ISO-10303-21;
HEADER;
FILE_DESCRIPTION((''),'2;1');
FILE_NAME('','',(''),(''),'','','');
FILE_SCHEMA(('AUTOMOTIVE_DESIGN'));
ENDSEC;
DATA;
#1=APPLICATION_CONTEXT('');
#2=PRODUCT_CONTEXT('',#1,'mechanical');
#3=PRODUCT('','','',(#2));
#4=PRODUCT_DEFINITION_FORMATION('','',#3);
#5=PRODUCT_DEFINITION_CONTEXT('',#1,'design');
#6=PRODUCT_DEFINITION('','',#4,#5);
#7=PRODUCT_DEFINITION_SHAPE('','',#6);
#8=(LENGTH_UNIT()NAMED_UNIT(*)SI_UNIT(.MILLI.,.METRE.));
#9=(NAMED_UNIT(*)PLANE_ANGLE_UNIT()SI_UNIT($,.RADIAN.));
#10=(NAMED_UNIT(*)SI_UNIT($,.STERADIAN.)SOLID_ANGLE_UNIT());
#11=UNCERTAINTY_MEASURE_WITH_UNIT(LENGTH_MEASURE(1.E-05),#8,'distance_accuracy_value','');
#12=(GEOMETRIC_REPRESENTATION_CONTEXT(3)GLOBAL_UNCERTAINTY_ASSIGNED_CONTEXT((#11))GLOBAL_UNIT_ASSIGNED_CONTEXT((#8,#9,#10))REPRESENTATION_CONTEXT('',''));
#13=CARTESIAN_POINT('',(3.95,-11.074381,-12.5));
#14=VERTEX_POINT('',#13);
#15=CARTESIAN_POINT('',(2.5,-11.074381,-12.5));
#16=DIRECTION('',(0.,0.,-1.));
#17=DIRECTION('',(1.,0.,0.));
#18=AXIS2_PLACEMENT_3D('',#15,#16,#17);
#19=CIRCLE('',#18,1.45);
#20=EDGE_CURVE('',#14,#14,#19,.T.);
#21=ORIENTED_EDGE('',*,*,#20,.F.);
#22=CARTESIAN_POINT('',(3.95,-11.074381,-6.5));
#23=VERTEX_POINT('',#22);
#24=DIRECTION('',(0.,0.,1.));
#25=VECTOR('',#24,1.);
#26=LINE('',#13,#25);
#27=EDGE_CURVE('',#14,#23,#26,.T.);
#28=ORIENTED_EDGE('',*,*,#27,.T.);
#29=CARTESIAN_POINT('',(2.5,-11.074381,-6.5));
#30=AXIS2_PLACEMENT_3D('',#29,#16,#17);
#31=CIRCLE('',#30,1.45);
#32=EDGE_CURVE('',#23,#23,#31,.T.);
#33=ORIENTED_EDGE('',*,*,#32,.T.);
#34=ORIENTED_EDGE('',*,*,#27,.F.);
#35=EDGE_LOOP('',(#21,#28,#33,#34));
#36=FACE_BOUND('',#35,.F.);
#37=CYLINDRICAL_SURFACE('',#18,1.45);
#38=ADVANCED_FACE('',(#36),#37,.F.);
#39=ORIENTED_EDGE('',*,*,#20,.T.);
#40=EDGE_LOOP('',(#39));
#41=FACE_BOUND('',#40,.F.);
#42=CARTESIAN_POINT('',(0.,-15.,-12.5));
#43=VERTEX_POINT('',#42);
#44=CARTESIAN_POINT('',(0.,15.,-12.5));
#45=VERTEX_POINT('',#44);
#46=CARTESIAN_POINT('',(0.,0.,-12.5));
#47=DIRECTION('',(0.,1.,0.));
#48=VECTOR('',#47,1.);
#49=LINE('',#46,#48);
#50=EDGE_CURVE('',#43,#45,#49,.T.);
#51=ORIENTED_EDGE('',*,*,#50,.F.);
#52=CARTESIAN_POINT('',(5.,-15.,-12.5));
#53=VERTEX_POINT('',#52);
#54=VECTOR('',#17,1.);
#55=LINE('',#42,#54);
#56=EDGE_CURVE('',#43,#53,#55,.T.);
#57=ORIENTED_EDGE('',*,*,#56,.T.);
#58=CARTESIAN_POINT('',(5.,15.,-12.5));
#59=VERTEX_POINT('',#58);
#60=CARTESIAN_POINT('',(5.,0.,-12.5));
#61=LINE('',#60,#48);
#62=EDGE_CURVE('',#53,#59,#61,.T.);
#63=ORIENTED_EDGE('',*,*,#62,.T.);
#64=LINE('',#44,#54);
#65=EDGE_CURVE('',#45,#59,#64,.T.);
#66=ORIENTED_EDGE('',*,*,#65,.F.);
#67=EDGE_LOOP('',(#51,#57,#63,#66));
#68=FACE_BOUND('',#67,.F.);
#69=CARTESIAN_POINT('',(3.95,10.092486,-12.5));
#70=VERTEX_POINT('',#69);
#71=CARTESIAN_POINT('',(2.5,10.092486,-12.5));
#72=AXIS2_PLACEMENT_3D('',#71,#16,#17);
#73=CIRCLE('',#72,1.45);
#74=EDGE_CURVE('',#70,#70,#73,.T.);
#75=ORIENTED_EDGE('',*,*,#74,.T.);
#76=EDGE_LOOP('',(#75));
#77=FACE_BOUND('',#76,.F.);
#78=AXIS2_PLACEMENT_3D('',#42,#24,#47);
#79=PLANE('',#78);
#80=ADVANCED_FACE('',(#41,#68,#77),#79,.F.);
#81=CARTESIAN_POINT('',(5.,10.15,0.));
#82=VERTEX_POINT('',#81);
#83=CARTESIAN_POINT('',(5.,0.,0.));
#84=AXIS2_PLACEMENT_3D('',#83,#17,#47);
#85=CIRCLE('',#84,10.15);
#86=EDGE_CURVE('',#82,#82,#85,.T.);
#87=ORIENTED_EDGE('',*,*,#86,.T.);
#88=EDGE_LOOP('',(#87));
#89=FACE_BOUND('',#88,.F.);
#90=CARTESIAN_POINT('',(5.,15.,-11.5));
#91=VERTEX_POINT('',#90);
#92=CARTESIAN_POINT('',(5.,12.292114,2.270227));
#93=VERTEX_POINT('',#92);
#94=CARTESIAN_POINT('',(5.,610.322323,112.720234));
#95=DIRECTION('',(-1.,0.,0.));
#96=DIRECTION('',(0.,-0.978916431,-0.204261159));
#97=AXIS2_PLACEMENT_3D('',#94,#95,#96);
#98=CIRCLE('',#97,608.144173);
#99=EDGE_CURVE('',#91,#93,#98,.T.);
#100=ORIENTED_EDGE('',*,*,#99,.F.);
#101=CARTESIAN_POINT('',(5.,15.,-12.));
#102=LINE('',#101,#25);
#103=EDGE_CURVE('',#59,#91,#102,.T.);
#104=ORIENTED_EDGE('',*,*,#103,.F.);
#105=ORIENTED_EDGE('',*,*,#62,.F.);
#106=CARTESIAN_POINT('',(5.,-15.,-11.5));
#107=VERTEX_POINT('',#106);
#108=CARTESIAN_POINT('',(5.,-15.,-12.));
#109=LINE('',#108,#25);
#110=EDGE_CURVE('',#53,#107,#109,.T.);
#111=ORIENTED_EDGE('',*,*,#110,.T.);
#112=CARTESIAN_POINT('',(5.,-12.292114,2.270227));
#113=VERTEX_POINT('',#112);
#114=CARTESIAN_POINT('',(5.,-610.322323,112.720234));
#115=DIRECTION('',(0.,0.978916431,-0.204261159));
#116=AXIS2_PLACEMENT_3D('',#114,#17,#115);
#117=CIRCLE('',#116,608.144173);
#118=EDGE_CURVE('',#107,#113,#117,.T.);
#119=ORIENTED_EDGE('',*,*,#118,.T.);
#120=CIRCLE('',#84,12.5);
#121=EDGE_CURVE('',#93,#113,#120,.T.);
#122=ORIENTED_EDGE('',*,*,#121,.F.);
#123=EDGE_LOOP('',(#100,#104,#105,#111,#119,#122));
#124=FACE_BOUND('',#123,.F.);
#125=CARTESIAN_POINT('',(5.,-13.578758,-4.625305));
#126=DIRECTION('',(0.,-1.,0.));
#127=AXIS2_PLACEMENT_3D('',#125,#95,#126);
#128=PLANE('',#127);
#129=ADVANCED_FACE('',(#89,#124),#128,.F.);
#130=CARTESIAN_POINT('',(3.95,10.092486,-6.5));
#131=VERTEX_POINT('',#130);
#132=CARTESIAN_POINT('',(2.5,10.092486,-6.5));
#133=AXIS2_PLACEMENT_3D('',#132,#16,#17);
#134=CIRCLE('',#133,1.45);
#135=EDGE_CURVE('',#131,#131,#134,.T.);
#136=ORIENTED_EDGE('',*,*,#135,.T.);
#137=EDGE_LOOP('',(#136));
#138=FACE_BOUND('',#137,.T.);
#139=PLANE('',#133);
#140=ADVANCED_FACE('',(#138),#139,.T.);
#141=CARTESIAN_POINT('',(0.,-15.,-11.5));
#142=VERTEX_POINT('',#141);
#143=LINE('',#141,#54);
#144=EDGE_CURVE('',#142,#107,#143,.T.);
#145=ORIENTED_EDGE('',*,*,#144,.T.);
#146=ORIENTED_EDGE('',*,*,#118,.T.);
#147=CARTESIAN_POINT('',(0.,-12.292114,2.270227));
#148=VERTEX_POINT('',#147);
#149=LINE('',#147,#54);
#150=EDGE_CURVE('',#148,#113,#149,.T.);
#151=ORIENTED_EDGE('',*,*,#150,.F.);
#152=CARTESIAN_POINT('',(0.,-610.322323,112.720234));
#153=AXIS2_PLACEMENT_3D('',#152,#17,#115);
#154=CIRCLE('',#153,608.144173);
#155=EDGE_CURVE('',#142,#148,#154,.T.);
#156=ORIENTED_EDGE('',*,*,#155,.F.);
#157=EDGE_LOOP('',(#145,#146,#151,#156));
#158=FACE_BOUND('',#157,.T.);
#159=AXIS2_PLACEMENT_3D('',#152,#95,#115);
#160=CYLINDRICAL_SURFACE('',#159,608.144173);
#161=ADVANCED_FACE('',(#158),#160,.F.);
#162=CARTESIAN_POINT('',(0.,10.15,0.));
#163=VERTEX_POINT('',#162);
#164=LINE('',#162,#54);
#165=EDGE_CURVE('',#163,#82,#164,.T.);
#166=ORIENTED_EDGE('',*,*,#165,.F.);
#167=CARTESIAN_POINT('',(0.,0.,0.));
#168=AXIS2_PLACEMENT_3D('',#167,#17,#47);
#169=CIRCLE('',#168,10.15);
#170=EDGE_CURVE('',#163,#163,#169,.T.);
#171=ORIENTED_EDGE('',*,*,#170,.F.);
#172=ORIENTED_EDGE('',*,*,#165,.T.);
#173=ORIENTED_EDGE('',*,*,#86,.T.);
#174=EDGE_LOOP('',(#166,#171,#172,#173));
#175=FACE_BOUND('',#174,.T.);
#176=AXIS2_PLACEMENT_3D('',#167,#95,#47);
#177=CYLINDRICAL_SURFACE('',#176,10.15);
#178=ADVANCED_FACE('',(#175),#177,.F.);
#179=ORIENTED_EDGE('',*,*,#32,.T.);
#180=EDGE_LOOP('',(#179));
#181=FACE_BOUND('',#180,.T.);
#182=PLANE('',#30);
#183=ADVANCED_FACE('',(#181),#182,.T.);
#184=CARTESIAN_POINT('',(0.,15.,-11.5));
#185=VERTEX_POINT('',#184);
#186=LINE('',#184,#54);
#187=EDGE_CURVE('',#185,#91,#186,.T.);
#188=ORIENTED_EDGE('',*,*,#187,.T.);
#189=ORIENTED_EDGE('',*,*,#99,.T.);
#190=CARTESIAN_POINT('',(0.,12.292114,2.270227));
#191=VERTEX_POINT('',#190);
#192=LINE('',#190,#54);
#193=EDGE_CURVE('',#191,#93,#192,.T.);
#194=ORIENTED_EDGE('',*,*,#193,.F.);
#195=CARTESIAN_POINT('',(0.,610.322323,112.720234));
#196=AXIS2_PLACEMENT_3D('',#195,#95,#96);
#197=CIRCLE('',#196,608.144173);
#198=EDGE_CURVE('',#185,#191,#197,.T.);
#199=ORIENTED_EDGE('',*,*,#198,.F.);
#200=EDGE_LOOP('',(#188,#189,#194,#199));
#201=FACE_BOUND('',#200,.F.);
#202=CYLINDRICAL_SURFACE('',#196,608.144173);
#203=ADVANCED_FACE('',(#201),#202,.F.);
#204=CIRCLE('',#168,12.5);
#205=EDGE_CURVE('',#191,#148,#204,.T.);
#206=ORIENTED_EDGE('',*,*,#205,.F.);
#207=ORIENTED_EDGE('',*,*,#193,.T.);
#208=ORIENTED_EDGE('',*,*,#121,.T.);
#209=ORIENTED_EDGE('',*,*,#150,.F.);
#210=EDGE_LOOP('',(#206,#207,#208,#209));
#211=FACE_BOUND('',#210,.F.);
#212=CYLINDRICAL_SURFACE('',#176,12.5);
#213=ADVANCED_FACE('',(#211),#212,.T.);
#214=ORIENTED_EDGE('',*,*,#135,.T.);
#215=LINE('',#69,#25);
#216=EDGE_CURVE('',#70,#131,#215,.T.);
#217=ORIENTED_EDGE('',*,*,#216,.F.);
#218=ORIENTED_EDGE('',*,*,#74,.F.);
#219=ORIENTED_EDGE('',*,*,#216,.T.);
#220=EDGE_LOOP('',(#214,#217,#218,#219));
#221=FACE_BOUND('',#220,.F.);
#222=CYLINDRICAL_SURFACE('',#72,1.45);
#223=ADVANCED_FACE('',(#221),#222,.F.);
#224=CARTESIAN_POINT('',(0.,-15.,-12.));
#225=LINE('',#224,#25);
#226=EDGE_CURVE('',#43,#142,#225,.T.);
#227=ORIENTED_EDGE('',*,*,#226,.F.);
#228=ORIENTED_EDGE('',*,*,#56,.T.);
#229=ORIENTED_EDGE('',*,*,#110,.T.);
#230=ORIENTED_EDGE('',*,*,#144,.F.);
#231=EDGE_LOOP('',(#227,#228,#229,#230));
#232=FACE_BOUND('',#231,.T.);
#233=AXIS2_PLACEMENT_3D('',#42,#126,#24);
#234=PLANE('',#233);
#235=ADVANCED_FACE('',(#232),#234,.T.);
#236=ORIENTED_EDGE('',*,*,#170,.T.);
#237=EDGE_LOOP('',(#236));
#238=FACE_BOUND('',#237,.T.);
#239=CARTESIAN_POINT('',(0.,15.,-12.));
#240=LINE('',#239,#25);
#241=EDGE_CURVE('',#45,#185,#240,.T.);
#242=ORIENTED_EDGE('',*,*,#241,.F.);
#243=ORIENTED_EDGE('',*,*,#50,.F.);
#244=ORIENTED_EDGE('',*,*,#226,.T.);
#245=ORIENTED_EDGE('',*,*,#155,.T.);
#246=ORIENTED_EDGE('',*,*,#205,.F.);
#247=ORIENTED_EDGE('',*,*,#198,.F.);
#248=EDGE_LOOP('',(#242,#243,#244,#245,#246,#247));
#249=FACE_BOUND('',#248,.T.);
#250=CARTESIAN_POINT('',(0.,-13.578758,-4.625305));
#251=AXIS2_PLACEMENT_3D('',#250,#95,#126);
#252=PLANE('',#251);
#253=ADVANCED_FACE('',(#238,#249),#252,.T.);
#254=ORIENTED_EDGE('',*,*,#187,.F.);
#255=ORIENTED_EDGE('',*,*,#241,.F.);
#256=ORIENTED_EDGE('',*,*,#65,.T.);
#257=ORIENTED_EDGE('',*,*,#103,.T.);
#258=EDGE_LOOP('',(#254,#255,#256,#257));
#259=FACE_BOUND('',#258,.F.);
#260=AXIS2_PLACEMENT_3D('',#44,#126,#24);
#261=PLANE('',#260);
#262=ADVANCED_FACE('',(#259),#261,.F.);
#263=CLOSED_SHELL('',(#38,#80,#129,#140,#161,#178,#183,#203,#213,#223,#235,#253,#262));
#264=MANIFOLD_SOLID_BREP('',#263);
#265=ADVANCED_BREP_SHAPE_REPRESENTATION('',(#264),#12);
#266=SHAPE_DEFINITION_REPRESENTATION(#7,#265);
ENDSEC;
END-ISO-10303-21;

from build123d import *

# Parameters (mm, degrees)
F0_R        = 10.15
F0_W        = 30
F0_H        = 1
F1_DEPTH    = 5
F2_T1_DEPTH = 5
F3_R        = 1.45
F4_DEPTH    = 6


# Not quite as in the source:
# - a fillet or chamfer that OpenCascade refuses, or shapes differently, is made with other operations: its cross-section is extruded or revolved along the edge and cut away or added


with BuildPart() as f1:
    # F0 (on Right) → F1 (new body)
    with BuildSketch(Plane.YZ):
        with BuildLine():
            Line((15, -11.5), (12.5, 0))
            ThreePointArc((12.5, 0), (0, 12.5), (-12.5, 0))
            Line((-12.5, 0), (-15, -11.5))
            Line((-15, -11.5), (15, -11.5))
        make_face()
        Circle(F0_R, mode=Mode.SUBTRACT)
        with Locations((0, -12)):
            Rectangle(F0_W, F0_H)
    extrude(amount=F1_DEPTH)

    # F2: fillet of radius 608.1441737805 on 2 edges, made by hand

    # F2_s2 → F2_t1 (join)
    with BuildSketch(Plane.YZ):
        with BuildLine():
            ThreePointArc((-15, -11.5), (-13.6063343728, -4.6226980795), (-12.2921141837, 2.2702266177))
            ThreePointArc((-12.2921141837, 2.2702266177), (-12.4479200531, 1.1398624268), (-12.5, 0))
            Line((-12.5, 0), (-15, -11.5))
        make_face()
        with BuildLine():
            ThreePointArc((15, -11.5), (13.6063343728, -4.6226980795), (12.2921141837, 2.2702266177))
            ThreePointArc((12.2921141837, 2.2702266177), (12.4479200531, 1.1398624268), (12.5, 0))
            Line((12.5, 0), (15, -11.5))
        make_face()
    extrude(amount=F2_T1_DEPTH)

    # F3 (on face) → F4 (cut)
    with BuildSketch(Plane(origin=(0, 0, -12.5), x_dir=(1, 0, 0), z_dir=(0, 0, -1))):
        with Locations((2.4999999441, 11.0743809491)):
            Circle(F3_R)
        with Locations((2.5, -10.09248567)):
            Circle(F3_R)
    extrude(amount=-F4_DEPTH, mode=Mode.SUBTRACT)


solid = f1.part
